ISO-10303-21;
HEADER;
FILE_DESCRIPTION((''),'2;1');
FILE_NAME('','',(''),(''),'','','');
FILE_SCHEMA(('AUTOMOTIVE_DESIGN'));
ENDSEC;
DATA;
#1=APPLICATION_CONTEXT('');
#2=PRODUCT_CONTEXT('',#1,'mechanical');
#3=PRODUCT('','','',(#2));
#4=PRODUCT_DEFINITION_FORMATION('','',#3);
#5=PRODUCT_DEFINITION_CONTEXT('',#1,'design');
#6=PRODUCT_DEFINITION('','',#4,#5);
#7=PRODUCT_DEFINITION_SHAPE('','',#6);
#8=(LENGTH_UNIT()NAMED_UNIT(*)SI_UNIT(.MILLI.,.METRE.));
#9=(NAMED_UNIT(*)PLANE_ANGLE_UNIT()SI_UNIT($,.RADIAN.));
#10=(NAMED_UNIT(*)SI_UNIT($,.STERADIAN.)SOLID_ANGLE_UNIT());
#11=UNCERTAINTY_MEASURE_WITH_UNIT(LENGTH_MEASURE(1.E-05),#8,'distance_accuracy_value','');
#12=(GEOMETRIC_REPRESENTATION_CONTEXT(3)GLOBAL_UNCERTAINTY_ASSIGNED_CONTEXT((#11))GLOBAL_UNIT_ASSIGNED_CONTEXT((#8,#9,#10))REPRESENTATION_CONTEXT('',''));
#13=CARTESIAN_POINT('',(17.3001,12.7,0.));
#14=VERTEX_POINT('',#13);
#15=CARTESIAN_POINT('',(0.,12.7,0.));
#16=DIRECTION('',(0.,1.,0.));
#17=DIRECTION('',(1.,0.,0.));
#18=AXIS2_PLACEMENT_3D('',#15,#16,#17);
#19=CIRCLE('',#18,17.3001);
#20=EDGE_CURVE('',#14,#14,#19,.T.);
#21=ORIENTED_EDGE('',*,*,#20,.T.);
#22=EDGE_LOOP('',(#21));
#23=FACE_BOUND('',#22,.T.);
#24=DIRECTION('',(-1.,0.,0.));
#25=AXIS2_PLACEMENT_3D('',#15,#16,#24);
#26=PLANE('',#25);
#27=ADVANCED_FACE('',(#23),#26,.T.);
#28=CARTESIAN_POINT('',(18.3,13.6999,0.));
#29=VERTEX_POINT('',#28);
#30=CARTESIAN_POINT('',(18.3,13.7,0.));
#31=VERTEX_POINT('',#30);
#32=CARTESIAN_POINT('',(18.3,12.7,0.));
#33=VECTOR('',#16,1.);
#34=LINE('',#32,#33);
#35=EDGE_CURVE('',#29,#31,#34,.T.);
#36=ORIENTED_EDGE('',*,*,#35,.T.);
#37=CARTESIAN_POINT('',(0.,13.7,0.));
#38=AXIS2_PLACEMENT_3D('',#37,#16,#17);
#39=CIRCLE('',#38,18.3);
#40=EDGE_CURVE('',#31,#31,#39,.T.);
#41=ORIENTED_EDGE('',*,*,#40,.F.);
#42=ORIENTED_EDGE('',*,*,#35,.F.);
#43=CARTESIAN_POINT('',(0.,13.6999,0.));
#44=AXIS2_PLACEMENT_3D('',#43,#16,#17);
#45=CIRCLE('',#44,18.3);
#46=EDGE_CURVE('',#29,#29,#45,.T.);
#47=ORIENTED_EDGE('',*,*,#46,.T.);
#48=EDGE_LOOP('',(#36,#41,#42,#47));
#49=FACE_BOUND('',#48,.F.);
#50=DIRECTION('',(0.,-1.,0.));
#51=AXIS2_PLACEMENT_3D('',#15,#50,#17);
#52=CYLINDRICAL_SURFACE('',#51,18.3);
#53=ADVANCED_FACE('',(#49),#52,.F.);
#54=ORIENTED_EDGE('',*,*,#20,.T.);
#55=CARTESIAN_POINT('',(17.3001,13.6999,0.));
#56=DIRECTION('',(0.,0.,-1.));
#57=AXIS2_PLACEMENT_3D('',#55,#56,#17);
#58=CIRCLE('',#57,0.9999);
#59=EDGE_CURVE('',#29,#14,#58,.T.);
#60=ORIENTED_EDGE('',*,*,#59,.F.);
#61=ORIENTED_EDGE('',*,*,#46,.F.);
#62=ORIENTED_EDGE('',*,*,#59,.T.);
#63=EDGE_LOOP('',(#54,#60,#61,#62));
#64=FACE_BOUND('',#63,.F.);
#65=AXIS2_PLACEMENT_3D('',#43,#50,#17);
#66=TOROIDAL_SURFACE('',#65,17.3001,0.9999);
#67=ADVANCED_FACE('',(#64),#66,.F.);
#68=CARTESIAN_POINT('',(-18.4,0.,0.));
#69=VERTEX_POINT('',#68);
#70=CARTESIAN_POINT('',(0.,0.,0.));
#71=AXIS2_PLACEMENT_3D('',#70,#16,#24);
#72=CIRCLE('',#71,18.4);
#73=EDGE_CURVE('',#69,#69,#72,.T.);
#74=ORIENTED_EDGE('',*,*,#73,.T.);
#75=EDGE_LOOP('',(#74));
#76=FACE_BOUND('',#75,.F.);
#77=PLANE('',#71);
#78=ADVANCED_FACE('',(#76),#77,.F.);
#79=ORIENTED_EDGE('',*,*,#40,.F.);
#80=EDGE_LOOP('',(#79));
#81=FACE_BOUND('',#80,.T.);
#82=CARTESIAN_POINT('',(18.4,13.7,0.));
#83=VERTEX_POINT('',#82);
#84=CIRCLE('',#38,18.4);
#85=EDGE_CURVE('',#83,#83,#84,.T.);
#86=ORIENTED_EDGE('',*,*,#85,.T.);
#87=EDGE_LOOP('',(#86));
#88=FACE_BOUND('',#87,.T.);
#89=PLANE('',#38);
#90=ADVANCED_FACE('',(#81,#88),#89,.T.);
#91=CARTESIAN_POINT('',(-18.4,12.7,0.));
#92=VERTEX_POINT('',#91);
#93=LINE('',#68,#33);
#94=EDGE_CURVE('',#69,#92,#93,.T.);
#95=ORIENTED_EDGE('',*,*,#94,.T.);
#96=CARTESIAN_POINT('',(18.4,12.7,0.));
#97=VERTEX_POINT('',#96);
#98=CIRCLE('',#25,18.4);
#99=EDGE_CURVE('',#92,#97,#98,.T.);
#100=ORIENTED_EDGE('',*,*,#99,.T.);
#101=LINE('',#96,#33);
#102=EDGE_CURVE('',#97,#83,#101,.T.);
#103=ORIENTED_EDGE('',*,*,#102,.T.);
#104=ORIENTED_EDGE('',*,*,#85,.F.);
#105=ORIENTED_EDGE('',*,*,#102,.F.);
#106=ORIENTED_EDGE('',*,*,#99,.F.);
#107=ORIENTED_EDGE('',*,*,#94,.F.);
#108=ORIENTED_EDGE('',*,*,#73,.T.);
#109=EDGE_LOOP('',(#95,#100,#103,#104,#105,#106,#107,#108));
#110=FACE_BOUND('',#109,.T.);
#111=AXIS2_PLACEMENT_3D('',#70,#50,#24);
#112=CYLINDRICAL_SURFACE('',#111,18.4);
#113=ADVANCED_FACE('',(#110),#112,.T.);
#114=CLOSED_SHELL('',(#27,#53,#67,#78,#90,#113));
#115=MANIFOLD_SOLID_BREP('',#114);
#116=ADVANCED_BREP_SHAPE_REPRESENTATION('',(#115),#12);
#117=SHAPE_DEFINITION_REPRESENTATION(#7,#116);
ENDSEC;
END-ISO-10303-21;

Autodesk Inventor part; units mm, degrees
ref_plane "YZ Plane" through (0, 0, 0) normal (1, 0, 0) x (0, 1, 0)
ref_plane "XZ Plane" through (0, 0, 0) normal (0, 1, 0) x (-1, 0, 0)
ref_plane "XY Plane" through (0, 0, 0) normal (0, 0, 1) x (1, 0, 0)
sketch "Sketch3" plane through (0, 0, 0) normal (0, 1, 0) x (-1, 0, 0)
  circle A0 centre (0, 0) radius 18.4
  dimension "d32" = 36.8
extrude "Extrusion4" add sketch "Sketch3" along normal blind 12.7
sketch "Sketch4" plane through (0, 12.7, 0) normal (0, 1, 0) x (1, 0, 0)
  circle A0 centre (0, 0) radius 18.4 projected
  circle A1 centre (0, 0) radius 17.75
  circle A2 centre (0, 0) radius 18.4 projected
  circle A3 centre (0, 0) radius 18.3
  dimension "d35" = 0.1
sketch "Sketch4 outline for Extrusion5" plane through (0, 12.7, 0) normal (0, 1, 0) x (1, 0, 0)
  circle A0 centre (0, 0) radius 18.4
  circle A1 centre (0, 0) radius 18.3
extrude "Extrusion5" add sketch "Sketch4 outline for Extrusion5" along normal blind 1
fillet "Fillet1" radius 1 1 edges at (-18.3, 12.7, 0)
equation "\"d32\" = icicles25D"
equation "\"d33\" = chairThickness"
equation "\"moduleHeight\" = 96"
equation "\"moduleMountD\" = 6.8"
equation "\"moduleCornerR\" = 5"
equation "\"d4\" = moduleCornerR"
equation "\"d5\" = moduleMountD"
equation "\"d6\" = moduleMountD"
equation "\"d8\" = moduleMountD"
equation "\"d10\" = moduleMountD"
equation "\"moduleOpeningR\" = 25"
equation "\"d13\" = moduleOpeningR"
equation "\"thickness\" = 6"
equation "\"d15\" = thickness"
equation "\"d16\" = 0"
equation "\"iciclesMountD\" = 42.5"
equation "\"d17\" = iciclesMountD"
equation "\"clearanceM3\" = 3.6"
equation "\"d18\" = clearanceM6"
equation "\"d21\" = 360deg"
equation "\"d0\" = moduleHeight"
equation "\"iciclesBaseOuterD\" = 48"
equation "\"iciclesPlugD\" = 35.5"
equation "\"chairThickness\" = 12.7"
equation "\"isiclesBaseThickness\" = 3"
equation "\"clearanceM6\" = 3.6"
equation "\"d7\" = iciclesBaseOuterD"
equation "\"d9\" = iciclesMountD"
equation "\"d22\" = 360deg"
equation "\"d24\" = isiclesBaseThickness"
equation "\"d25\" = 0"
equation "\"d29\" = isiclesBaseThickness"
equation "\"compressedGasket\" = 0.5"
equation "\"d31\" = 0"
equation "\"iciclesPlugNeck\" = 16"
equation "\"headClearanceM3\" = 5.6"
equation "\"d42\" = 360deg"
equation "\"d45\" = 0"
equation "\"iciclesFilletR\" = 2"
equation "\"d46\" = iciclesFilletR"
equation "\"d47\" = iciclesFilletR"
equation "\"icicles25D\" = 36.8"
equation "\"icicles25T\" = 8.4"
equation "\"icicles25ND\" = 18"
equation "\"insertM3\" = 4"
equation "\"d11\" = insertM3"
equation "\"isiclesPlugT\" = icicles25T"
equation "\"d30\" = isiclesPlugT + chairThickness + compressedGasket"
equation "\"d39\" = headClearanceM3"
properties part number "Module_bottom_Icicles26_v2_3DPrint"
